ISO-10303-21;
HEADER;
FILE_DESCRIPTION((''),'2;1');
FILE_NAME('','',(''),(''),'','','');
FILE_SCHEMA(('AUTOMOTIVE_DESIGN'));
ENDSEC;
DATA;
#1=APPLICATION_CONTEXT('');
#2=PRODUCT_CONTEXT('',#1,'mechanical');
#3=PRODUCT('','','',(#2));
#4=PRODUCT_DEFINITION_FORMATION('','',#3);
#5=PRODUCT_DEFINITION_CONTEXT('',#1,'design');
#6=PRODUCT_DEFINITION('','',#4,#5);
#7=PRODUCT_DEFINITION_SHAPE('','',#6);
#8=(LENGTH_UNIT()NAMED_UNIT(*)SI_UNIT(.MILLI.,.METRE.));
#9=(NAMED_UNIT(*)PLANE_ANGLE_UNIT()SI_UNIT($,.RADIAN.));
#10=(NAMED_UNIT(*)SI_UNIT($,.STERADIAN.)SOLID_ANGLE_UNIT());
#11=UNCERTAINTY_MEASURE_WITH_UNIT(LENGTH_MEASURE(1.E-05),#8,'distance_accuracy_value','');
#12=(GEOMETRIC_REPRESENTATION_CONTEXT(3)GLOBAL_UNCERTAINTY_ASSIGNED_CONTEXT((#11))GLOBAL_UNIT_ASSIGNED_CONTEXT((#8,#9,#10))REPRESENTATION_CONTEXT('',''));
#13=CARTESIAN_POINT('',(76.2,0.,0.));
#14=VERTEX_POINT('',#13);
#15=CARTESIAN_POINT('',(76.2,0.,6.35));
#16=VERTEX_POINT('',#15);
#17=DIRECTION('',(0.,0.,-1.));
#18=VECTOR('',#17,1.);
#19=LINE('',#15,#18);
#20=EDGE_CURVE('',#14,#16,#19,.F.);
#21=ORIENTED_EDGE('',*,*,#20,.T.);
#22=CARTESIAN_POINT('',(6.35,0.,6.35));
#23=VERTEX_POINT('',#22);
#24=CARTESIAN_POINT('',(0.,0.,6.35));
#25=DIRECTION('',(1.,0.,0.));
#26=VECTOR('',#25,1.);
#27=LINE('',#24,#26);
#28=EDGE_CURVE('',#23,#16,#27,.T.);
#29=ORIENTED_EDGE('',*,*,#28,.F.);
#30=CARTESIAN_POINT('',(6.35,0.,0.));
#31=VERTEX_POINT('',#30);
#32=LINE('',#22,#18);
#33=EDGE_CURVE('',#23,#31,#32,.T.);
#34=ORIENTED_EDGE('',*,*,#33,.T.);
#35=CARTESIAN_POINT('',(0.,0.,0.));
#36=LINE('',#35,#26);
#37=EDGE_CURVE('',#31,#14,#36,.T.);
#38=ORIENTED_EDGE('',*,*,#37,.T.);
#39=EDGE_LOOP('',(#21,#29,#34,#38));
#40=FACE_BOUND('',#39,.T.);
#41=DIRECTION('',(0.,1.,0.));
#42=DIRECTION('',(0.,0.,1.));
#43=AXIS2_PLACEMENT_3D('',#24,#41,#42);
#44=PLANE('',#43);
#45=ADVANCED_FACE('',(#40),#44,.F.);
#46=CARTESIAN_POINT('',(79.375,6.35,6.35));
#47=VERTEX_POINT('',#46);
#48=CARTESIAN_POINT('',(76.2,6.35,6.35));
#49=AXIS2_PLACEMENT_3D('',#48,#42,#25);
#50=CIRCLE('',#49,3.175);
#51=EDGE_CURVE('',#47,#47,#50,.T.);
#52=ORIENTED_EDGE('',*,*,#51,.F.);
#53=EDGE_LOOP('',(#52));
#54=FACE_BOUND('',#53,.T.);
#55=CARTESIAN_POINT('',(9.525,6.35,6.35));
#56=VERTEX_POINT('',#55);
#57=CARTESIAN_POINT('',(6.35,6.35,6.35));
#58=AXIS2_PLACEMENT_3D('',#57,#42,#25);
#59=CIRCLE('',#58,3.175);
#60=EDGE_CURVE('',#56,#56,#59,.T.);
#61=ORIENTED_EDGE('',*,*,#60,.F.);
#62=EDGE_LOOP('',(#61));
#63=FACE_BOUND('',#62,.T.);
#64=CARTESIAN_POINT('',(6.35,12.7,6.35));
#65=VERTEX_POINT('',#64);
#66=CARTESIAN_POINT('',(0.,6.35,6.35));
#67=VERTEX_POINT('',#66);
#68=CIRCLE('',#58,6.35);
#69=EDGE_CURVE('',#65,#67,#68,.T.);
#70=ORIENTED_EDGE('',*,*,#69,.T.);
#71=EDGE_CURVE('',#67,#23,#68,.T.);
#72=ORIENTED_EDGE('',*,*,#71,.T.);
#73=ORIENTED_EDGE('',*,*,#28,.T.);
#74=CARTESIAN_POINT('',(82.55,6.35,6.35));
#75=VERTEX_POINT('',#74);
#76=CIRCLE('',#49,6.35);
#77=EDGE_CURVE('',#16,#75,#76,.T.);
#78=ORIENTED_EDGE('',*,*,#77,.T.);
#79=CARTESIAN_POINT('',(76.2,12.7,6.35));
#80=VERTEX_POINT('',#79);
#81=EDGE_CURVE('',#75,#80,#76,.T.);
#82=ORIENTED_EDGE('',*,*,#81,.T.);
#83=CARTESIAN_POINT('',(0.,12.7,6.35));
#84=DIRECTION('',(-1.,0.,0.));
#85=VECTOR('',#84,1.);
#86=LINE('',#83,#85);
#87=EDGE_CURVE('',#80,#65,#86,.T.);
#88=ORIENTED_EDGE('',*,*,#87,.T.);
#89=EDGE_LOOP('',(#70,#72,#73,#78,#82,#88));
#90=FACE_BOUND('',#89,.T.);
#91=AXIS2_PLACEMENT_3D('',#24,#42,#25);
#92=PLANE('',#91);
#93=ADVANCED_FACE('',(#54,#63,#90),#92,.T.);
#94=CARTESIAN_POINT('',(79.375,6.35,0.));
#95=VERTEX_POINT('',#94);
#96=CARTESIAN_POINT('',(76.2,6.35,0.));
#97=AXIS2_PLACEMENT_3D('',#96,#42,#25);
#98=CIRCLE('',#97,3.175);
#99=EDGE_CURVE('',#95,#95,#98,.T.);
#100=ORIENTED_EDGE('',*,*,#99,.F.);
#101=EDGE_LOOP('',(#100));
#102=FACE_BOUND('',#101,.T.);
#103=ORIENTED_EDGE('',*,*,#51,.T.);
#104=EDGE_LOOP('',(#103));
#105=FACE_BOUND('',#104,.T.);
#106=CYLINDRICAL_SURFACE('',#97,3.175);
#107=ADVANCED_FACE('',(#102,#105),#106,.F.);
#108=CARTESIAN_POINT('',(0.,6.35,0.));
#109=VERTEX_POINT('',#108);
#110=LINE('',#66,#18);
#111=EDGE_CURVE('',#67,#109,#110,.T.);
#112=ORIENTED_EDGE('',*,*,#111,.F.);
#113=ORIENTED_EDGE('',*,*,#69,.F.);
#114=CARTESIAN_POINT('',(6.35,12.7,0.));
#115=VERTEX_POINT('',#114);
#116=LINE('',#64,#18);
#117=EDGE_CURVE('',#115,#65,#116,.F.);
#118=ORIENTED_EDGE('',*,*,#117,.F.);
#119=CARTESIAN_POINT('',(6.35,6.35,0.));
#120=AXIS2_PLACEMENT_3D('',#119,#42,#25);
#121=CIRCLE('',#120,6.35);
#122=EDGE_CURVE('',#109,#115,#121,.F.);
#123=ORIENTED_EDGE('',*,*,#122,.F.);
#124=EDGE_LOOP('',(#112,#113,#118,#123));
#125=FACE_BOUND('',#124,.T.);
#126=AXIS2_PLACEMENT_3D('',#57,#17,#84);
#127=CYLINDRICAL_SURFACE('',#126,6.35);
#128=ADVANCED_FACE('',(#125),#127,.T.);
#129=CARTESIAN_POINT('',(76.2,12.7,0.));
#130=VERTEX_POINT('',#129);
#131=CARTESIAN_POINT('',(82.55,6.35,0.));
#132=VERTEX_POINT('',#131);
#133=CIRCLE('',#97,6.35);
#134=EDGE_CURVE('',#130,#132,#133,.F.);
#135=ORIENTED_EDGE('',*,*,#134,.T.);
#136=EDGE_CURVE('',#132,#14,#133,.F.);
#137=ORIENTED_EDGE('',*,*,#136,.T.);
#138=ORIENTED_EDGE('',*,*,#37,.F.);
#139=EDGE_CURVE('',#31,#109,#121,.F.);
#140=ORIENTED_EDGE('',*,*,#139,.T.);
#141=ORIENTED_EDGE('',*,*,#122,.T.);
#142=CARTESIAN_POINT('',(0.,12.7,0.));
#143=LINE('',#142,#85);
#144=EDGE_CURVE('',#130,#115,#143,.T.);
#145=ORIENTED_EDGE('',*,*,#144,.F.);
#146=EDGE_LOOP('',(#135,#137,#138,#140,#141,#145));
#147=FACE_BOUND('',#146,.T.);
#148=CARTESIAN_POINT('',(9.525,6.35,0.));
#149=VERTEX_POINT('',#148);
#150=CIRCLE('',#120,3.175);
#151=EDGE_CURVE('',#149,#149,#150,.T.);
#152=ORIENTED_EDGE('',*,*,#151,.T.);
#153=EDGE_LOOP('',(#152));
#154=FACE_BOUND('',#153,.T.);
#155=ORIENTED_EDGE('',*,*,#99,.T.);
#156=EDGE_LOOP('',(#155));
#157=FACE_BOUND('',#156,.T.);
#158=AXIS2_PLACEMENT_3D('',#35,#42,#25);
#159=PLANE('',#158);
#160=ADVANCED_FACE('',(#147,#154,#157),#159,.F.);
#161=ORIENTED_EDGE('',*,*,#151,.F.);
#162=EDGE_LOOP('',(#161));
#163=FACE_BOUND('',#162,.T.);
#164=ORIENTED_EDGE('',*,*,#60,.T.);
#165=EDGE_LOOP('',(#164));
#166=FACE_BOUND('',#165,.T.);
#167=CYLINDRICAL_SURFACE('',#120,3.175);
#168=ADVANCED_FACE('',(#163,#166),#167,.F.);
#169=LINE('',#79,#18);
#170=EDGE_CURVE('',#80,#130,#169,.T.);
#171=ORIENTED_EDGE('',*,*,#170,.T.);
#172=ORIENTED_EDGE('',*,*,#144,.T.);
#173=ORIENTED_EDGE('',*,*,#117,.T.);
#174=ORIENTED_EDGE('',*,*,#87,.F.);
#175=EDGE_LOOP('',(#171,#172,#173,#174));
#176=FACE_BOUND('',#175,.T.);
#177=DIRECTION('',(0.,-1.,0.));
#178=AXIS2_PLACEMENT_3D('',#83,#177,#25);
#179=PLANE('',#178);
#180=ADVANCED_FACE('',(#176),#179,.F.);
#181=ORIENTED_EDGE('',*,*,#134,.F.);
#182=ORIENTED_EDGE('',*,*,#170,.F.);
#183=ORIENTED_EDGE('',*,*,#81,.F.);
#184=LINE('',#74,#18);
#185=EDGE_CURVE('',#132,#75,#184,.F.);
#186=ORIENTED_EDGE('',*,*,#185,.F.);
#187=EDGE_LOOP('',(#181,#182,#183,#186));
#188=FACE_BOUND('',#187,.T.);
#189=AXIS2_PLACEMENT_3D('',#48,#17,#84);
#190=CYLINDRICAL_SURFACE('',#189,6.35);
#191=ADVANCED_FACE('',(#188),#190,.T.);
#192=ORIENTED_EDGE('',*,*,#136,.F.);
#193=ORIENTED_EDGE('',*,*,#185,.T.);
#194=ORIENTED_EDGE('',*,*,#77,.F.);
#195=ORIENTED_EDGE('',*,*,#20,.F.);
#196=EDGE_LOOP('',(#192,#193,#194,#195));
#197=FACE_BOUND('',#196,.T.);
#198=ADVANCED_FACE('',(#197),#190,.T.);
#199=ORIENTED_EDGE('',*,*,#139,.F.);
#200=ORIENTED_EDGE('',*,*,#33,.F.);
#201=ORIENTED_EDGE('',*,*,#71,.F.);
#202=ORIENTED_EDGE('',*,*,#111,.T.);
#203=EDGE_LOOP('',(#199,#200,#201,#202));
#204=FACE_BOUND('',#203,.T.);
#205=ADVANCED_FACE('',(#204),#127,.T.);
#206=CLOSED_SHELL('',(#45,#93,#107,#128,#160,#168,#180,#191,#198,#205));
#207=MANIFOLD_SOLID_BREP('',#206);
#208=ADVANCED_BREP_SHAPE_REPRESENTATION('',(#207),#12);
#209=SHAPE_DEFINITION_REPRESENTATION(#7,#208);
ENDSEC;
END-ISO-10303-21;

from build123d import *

# Parameters (mm, degrees)
SKETCH2_W          = 82.55
SKETCH2_H          = 12.7
CRANK_HANDLE_DEPTH = 6.35
EDGE_1_R           = 6.35
EDGE_2_R           = 6.35
EDGE_3_R           = 6.35
EDGE_4_R           = 6.35
SKETCH3_R          = 3.175
HOLES_DEPTH        = 84.762252835


with BuildPart() as part:
    # Sketch2 → Crank Handle (new body)
    with BuildSketch(Plane.XY):
        with Locations((41.275, 6.35)):
            Rectangle(SKETCH2_W, SKETCH2_H)
    extrude(amount=CRANK_HANDLE_DEPTH)

    # Edge 1
    edge_1_edges = [part.edges().sort_by_distance(p)[0] for p in [
        (82.55, 12.7, 3.175),
    ]]
    fillet(edge_1_edges, radius=EDGE_1_R)

    # Edge 2
    edge_2_edges = [part.edges().sort_by_distance(p)[0] for p in [
        (82.55, 0, 3.175),
    ]]
    fillet(edge_2_edges, radius=EDGE_2_R - 0.0001)  # a hair under: the kernel refuses the full size

    # Edge 3
    edge_3_edges = [part.edges().sort_by_distance(p)[0] for p in [
        (0, 12.7, 3.175),
    ]]
    fillet(edge_3_edges, radius=EDGE_3_R)

    # Edge 4
    edge_4_edges = [part.edges().sort_by_distance(p)[0] for p in [
        (0, 0, 3.175),
    ]]
    fillet(edge_4_edges, radius=EDGE_4_R - 0.0001)  # a hair under: the kernel refuses the full size

    # Sketch3 → Holes (cut, through all)
    with BuildSketch(Plane.XY.offset(6.35)):
        with Locations((6.35, 6.35)):
            Circle(SKETCH3_R)
        with Locations((76.2, 6.35)):
            Circle(SKETCH3_R)
    extrude(amount=-HOLES_DEPTH, mode=Mode.SUBTRACT)


solid = part.part
